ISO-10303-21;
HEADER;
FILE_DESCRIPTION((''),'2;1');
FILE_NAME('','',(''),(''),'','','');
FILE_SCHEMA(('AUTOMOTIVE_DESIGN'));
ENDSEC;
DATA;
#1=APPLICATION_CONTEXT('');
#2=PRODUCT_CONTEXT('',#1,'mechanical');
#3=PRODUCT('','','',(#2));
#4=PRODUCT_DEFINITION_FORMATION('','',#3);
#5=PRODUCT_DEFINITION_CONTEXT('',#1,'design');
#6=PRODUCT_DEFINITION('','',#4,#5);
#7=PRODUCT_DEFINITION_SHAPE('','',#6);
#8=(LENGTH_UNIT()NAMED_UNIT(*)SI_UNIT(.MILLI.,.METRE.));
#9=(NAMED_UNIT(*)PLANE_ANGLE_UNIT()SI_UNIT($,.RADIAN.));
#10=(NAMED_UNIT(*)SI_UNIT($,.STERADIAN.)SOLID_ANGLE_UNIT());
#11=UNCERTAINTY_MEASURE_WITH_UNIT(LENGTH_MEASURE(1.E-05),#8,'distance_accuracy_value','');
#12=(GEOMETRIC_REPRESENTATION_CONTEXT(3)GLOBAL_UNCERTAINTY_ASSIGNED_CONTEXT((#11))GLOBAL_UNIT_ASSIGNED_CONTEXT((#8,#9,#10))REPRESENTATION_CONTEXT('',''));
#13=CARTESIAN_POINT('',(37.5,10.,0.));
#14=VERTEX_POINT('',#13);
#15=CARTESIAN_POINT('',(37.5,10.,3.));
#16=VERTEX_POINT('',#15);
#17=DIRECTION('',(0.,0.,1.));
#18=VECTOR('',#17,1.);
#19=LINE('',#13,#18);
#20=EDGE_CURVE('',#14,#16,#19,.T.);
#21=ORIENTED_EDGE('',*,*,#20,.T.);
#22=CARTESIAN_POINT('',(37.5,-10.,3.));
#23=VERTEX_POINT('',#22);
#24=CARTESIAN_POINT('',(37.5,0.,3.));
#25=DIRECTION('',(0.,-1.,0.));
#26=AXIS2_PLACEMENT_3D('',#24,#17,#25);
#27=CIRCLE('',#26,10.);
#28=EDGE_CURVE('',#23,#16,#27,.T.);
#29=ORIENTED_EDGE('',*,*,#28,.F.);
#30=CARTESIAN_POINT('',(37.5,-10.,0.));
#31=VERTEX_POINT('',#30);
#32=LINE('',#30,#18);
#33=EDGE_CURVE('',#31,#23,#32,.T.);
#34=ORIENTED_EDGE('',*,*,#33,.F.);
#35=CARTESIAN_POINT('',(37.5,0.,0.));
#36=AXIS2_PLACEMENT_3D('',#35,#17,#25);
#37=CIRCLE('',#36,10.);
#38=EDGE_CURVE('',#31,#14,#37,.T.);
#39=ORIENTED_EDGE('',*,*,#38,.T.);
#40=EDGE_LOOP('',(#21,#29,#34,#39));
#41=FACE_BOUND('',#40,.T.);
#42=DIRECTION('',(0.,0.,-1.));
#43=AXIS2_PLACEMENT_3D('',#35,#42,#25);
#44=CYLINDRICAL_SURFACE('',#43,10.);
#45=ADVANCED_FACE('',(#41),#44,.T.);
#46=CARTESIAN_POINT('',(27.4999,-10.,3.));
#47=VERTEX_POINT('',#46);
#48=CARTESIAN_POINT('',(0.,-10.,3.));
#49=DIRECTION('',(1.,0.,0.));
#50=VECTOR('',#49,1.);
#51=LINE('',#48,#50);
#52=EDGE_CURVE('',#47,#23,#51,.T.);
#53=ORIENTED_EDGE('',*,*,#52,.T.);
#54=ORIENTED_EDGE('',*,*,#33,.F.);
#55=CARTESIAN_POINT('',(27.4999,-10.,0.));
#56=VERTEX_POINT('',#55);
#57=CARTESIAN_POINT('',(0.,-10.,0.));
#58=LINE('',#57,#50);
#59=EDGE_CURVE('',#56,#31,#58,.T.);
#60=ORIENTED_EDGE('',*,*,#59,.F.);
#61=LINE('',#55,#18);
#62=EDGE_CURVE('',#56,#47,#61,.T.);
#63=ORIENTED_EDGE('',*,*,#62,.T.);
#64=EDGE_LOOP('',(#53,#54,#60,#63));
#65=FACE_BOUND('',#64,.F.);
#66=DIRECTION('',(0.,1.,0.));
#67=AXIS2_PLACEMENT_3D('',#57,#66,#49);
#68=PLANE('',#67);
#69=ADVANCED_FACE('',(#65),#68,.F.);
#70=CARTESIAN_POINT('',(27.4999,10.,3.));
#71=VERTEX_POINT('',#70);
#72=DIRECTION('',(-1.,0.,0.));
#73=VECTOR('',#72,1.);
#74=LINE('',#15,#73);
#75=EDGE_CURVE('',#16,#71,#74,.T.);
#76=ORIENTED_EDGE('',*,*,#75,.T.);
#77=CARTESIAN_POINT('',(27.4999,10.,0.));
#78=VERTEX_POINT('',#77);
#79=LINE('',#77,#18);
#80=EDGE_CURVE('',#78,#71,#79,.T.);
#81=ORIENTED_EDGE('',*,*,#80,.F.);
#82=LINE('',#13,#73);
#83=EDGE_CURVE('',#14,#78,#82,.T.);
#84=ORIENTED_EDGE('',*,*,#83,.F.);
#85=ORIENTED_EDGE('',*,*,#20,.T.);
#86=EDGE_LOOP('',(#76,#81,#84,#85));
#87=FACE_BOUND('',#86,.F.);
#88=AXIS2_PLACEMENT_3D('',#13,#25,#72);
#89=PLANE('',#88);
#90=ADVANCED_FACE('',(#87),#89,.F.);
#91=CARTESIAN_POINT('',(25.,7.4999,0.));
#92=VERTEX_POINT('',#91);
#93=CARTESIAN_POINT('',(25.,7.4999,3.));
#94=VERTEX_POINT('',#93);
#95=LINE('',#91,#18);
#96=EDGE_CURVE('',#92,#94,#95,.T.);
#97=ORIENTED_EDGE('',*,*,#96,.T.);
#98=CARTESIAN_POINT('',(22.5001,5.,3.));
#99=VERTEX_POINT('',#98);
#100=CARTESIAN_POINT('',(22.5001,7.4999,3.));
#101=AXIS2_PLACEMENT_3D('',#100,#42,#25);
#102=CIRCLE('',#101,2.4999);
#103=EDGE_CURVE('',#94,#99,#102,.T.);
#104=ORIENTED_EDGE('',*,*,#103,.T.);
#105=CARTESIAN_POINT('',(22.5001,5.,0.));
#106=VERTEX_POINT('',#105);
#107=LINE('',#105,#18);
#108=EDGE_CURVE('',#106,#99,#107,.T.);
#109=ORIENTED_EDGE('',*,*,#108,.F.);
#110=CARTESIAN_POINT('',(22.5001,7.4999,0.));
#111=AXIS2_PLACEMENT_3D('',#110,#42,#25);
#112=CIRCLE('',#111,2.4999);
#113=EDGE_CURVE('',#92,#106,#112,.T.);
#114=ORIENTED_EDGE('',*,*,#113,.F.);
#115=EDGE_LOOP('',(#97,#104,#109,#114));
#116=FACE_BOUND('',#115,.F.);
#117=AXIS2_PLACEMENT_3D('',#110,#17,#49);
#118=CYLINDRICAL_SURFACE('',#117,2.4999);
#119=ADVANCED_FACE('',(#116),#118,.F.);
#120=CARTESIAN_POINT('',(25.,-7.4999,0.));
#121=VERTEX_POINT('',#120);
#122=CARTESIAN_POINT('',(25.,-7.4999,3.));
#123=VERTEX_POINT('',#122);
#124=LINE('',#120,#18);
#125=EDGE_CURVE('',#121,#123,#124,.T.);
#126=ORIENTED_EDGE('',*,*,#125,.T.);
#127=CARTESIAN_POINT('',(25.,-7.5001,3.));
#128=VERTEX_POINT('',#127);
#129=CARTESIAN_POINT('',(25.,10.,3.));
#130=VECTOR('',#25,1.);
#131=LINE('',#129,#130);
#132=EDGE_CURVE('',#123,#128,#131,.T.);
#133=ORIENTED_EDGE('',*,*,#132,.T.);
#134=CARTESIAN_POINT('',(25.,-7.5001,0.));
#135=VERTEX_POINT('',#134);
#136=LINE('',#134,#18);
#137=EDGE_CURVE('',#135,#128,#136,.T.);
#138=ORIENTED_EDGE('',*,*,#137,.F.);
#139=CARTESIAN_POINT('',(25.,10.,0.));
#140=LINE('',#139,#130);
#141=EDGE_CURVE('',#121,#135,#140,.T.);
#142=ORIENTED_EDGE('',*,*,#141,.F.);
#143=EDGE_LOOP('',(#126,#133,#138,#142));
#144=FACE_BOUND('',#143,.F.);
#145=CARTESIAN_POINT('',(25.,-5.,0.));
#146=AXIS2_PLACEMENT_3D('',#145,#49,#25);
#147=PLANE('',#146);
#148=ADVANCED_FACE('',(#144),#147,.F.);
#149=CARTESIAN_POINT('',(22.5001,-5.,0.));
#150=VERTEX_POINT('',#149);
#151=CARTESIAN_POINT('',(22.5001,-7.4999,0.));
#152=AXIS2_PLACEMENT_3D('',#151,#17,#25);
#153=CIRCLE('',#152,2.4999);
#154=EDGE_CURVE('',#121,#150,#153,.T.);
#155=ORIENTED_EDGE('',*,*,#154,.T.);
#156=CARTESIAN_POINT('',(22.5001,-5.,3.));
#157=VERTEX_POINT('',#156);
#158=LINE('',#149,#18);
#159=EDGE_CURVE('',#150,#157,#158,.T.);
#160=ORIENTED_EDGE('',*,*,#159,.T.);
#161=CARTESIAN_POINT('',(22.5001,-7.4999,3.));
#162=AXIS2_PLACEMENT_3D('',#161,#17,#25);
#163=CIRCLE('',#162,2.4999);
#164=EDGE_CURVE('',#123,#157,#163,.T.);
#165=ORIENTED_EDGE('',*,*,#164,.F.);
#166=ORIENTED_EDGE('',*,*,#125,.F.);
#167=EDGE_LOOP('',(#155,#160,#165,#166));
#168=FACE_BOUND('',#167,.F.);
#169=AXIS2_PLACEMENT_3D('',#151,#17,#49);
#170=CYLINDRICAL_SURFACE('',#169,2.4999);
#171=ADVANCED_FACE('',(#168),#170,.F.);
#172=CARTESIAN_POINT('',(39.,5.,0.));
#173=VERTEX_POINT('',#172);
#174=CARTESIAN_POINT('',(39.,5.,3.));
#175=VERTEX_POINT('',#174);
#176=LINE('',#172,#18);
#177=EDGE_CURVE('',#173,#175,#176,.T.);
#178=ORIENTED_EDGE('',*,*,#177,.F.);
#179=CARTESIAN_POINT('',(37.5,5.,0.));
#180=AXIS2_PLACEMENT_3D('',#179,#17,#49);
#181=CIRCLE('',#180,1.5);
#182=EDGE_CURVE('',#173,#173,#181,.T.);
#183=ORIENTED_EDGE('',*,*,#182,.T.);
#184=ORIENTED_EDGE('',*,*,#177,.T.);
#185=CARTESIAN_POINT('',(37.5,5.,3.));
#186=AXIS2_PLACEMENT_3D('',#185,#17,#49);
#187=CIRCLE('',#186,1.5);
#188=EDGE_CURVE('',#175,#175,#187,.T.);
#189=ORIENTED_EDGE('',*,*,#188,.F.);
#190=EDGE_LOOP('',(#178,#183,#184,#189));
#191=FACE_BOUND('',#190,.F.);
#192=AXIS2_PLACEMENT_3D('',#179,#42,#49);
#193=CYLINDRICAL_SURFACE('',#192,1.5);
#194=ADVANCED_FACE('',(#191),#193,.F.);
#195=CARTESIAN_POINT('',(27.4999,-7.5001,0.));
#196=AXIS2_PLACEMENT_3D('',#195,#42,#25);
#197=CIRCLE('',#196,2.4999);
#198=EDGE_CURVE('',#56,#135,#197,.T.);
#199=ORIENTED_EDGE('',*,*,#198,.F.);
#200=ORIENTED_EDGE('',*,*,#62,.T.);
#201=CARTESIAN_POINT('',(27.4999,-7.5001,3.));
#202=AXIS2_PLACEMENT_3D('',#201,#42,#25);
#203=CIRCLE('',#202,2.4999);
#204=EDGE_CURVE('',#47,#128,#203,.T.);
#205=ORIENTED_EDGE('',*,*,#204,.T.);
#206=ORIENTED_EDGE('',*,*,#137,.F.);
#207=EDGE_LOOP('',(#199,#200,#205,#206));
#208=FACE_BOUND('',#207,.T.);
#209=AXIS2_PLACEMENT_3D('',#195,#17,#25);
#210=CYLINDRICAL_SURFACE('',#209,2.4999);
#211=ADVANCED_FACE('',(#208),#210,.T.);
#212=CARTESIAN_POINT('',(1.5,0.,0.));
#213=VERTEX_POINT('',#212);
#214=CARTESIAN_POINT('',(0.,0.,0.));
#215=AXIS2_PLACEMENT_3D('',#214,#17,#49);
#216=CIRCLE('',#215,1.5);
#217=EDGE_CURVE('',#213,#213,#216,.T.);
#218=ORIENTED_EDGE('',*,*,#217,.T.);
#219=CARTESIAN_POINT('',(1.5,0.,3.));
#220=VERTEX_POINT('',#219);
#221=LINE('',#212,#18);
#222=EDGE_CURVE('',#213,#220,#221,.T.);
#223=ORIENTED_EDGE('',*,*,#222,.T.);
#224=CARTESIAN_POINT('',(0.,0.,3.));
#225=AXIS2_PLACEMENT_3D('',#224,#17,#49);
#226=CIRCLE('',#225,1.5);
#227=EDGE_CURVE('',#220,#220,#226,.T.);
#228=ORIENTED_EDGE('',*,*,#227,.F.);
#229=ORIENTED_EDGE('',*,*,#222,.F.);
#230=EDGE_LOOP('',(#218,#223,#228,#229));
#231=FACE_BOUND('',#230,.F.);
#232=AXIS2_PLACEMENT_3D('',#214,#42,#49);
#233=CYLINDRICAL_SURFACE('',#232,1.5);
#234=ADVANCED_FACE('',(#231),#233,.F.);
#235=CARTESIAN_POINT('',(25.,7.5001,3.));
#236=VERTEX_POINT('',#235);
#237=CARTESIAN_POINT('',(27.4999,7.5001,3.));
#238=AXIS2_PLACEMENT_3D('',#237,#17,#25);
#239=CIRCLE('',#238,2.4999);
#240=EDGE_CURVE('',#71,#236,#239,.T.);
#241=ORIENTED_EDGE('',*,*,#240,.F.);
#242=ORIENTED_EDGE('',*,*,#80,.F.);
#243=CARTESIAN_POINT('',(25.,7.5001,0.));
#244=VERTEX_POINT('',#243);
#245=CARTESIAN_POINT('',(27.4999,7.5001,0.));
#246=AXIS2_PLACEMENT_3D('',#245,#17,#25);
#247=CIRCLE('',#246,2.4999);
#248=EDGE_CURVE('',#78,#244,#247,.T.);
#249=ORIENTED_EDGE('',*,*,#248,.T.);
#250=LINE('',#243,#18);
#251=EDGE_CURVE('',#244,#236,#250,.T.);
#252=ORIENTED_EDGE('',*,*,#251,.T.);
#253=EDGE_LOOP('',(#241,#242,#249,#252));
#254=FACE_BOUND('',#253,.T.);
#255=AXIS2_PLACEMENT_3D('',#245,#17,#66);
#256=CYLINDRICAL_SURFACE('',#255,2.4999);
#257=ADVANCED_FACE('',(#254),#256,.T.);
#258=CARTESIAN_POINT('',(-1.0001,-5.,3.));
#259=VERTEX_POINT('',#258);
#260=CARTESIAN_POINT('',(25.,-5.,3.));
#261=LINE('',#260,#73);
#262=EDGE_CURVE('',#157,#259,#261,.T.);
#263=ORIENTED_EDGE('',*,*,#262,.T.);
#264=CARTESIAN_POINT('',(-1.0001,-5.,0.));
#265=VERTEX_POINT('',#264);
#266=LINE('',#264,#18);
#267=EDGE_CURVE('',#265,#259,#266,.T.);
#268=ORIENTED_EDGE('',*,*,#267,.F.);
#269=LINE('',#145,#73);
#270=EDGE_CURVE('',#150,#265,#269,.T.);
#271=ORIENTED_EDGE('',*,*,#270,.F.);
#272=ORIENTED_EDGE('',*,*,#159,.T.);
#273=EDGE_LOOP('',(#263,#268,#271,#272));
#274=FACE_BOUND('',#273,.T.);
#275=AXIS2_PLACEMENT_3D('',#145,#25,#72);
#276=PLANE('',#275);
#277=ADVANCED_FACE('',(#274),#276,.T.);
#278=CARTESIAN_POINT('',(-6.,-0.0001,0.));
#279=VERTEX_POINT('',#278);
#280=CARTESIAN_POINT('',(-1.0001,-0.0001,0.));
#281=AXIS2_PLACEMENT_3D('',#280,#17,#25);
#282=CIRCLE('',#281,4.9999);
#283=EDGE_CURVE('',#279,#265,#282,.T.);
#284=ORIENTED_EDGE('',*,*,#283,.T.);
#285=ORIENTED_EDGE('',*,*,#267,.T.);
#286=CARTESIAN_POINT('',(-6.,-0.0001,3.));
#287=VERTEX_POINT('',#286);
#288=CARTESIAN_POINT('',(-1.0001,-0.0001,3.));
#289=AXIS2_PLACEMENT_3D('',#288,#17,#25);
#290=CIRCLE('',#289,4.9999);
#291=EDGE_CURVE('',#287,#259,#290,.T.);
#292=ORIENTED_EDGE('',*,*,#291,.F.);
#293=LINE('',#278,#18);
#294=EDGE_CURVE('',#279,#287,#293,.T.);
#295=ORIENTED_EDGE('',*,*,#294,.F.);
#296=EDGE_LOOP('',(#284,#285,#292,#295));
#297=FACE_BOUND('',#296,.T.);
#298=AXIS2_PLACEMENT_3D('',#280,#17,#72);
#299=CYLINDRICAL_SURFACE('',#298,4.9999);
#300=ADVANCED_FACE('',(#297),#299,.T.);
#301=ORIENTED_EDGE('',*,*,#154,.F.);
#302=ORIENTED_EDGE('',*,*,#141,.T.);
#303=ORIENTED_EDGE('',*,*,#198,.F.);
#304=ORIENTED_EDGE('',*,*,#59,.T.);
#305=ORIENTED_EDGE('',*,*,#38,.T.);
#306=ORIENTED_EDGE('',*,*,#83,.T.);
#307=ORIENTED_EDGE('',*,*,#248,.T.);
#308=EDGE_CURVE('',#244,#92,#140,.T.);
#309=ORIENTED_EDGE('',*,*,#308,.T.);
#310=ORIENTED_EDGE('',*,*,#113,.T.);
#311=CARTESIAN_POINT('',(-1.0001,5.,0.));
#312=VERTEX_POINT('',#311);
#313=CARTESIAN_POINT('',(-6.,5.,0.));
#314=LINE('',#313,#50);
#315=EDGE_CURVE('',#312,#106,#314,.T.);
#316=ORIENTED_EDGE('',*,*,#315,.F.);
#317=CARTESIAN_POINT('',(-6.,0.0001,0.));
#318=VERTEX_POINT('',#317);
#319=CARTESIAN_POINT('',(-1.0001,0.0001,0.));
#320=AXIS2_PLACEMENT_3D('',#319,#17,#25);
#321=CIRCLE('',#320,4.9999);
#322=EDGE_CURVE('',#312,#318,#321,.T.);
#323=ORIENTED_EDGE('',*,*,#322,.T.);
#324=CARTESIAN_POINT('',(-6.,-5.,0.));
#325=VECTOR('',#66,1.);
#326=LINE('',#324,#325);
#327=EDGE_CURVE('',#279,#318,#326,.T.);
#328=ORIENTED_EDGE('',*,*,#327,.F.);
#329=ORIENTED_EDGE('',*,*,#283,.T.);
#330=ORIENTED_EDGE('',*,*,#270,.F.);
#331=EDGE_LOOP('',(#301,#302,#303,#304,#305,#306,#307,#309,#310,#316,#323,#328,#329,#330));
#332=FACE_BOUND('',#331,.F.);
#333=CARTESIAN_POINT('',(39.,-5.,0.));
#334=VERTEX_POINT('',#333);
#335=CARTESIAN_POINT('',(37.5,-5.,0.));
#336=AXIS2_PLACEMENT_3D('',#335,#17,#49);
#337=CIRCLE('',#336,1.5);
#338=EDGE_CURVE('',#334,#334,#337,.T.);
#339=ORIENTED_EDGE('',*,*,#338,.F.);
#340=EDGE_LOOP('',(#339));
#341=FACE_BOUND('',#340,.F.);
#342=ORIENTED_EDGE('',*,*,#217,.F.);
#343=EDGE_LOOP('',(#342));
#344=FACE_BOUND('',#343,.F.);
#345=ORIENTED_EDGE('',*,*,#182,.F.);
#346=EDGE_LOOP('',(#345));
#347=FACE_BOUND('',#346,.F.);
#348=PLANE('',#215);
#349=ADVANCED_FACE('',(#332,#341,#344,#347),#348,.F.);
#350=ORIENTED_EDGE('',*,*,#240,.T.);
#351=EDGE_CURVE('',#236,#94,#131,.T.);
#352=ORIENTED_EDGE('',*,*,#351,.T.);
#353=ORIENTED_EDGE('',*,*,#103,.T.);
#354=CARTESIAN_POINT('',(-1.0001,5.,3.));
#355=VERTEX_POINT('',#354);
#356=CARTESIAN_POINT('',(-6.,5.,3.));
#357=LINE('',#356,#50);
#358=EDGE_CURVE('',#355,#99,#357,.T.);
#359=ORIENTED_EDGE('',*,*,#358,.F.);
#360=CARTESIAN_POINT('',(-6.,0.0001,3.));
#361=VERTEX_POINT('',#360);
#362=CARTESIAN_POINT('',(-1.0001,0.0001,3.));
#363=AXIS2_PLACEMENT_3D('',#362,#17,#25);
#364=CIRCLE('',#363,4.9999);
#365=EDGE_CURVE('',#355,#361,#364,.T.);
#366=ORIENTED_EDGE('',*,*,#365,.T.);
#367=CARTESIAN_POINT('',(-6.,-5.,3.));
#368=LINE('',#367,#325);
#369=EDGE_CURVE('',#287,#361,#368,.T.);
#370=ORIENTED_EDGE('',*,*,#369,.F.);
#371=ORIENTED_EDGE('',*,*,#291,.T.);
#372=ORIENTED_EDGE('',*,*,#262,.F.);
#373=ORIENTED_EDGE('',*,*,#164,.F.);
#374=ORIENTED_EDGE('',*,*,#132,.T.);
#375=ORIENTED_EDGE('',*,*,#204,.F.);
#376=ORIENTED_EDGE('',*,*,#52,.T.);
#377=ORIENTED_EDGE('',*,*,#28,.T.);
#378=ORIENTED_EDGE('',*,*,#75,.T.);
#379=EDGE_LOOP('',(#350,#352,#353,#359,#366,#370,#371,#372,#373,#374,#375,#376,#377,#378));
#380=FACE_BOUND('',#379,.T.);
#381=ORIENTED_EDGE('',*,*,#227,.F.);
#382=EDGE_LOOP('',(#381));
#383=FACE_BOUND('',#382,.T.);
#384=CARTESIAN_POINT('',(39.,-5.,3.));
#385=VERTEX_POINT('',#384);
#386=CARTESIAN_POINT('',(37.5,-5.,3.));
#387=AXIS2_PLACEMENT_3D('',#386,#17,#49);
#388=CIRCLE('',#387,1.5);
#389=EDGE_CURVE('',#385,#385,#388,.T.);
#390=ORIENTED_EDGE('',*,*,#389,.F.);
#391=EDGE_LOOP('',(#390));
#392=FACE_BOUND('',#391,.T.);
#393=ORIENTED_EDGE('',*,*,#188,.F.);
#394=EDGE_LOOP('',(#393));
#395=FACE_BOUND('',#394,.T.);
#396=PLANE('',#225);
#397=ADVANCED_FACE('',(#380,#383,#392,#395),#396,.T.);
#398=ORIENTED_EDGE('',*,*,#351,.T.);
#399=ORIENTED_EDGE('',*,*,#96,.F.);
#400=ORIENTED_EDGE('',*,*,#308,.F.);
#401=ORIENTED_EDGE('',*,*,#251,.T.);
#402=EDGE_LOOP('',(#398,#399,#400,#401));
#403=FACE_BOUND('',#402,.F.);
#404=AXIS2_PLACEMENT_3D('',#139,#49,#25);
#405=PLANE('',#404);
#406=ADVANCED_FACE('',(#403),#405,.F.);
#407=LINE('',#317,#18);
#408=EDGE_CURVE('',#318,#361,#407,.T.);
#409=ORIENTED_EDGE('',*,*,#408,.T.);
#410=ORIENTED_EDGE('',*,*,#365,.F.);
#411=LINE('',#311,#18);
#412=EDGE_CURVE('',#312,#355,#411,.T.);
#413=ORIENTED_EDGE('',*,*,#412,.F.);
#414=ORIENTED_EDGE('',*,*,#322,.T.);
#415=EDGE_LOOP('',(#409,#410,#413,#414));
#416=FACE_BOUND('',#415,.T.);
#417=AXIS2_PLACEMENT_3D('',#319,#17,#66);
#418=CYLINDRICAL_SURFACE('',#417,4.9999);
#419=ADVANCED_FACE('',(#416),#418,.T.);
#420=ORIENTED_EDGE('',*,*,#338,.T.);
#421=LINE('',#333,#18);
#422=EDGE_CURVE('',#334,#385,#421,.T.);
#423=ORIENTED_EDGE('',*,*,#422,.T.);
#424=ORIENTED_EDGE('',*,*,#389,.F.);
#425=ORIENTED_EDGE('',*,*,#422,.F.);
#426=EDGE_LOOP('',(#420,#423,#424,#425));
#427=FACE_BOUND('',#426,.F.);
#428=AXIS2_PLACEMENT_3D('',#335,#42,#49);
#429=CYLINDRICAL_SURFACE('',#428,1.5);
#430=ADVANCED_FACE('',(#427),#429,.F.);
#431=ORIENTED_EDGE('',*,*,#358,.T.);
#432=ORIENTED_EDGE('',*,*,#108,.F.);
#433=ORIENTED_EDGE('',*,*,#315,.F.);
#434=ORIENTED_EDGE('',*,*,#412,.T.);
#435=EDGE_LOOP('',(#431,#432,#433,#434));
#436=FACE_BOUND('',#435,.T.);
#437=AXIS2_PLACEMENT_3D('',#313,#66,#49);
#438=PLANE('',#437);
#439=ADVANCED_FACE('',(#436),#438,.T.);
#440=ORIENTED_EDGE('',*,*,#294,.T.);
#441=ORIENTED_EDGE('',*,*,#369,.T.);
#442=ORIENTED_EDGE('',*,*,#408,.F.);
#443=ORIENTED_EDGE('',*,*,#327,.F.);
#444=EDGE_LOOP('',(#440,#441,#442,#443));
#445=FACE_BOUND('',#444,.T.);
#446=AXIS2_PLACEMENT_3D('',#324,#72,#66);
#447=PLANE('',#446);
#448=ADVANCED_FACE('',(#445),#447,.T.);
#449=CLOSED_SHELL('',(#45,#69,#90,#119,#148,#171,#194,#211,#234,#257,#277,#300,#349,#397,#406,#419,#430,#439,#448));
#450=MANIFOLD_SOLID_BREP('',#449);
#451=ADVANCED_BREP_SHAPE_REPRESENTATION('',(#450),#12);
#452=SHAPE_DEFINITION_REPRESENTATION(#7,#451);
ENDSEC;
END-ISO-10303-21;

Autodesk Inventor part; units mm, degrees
ref_plane "YZ Plane" through (0, 0, 0) normal (1, 0, 0) x (0, 1, 0)
ref_plane "XZ Plane" through (0, 0, 0) normal (0, 1, 0) x (-1, 0, 0)
ref_plane "XY Plane" through (0, 0, 0) normal (0, 0, 1) x (1, 0, 0)
sketch "Sketch1" plane through (0, 0, 0) normal (0, 0, 1) x (1, 0, 0)
  line L0 (0, 0) -> (37.5, 0) construction
  line L1 (0, -10) -> (37.5, -10)
  line L2 (37.5, 10) -> (0, 10)
  arc A0 (0, 10) -> (0, -10) centre (0, 0) ccw
  arc A1 (37.5, -10) -> (37.5, 10) centre (37.5, 0) ccw
  line L3 (0, 0) -> (37.5, 0) construction
  circle A2 centre (0, 0) radius 1.5
  circle A3 centre (37.5, -5) radius 1.5
  circle A4 centre (37.5, 5) radius 1.5
  point P0 (18.75, 0)
  dimension "d0" = 37.5
  dimension "d1" = 0
  dimension "d2" = 20
  dimension "d3" = 3
  dimension "d4" = 3
  dimension "d5" = 3
  dimension "d6" = 10
  dimension "d7" = 5
  dimension "d8" = 0
  dimension "d9" = 0
extrude "Extrusion1" add sketch "Sketch1" along normal blind 3
sketch "Sketch2" plane through (0, 0, 0) normal (0, 0, -1) x (-1, 0, 0)
  line L0 (6, 5) -> (-25, 5)
  line L1 (-25, 10) -> (-25, -10)
  line L2 (-25, -5) -> (6, -5)
  line L3 (6, -5) -> (6, 5)
  arc A0 (-37.5, 10) -> (-37.5, -10) centre (-37.5, 0) ccw projected
  line L4 (0, -10) -> (-37.5, -10) projected
  arc A1 (0, -10) -> (0, 10) centre (0, 0) ccw projected
  line L5 (-37.5, 10) -> (0, 10) projected
  circle A2 centre (-37.5, 5) radius 1.5 projected
  circle A3 centre (-37.5, -5) radius 1.5 projected
  circle A4 centre (0, 0) radius 1.5 projected
  dimension "d12" = 6
  dimension "d13" = 5
  dimension "d14" = 5
  dimension "d15" = 25
extrude "Extrusion2" cut sketch "Sketch2" against normal up to surface (3 mm away) contours L0 L1 L5 A1 L4 L2 L3
fillet "Fillet1" radius 2.5 4 edges at (25, 5, 1.5) (25, 10, 1.5) (25, -5, 1.5) (25, -10, 1.5)
fillet "Fillet2" radius 5 2 edges at (-6, 5, 1.5) (-6, -5, 1.5)
sketch "Sketch3" plane through (0, 0, 3) normal (0, 0, 1) x (1, 0, 0)
  arc A0 (-1, 5) -> (-1, -5) centre (-1, 0) ccw projected
  line L0 (-1, -5) -> (22.5, -5) projected
  arc A1 (25, -7.5) -> (22.5, -5) centre (22.5, -7.5) ccw projected
  arc A2 (25, -7.5) -> (27.5, -10) centre (27.5, -7.5) ccw projected
  line L1 (27.5, -10) -> (37.5, -10) projected
  arc A3 (37.5, -10) -> (37.5, 10) centre (37.5, 0) ccw projected
  line L2 (37.5, 10) -> (27.5, 10) projected
  arc A4 (27.5, 10) -> (25, 7.5) centre (27.5, 7.5) ccw projected
  arc A5 (22.5, 5) -> (25, 7.5) centre (22.5, 7.5) ccw projected
  line L3 (22.5, 5) -> (-1, 5) projected
  circle A6 centre (37.5, 5) radius 1.5 projected
  circle A7 centre (37.5, -5) radius 1.5 projected
  circle A8 centre (0, 0) radius 1.5 projected
properties part number "Arm5_3D" material "Aluminum 6061, Welded"
